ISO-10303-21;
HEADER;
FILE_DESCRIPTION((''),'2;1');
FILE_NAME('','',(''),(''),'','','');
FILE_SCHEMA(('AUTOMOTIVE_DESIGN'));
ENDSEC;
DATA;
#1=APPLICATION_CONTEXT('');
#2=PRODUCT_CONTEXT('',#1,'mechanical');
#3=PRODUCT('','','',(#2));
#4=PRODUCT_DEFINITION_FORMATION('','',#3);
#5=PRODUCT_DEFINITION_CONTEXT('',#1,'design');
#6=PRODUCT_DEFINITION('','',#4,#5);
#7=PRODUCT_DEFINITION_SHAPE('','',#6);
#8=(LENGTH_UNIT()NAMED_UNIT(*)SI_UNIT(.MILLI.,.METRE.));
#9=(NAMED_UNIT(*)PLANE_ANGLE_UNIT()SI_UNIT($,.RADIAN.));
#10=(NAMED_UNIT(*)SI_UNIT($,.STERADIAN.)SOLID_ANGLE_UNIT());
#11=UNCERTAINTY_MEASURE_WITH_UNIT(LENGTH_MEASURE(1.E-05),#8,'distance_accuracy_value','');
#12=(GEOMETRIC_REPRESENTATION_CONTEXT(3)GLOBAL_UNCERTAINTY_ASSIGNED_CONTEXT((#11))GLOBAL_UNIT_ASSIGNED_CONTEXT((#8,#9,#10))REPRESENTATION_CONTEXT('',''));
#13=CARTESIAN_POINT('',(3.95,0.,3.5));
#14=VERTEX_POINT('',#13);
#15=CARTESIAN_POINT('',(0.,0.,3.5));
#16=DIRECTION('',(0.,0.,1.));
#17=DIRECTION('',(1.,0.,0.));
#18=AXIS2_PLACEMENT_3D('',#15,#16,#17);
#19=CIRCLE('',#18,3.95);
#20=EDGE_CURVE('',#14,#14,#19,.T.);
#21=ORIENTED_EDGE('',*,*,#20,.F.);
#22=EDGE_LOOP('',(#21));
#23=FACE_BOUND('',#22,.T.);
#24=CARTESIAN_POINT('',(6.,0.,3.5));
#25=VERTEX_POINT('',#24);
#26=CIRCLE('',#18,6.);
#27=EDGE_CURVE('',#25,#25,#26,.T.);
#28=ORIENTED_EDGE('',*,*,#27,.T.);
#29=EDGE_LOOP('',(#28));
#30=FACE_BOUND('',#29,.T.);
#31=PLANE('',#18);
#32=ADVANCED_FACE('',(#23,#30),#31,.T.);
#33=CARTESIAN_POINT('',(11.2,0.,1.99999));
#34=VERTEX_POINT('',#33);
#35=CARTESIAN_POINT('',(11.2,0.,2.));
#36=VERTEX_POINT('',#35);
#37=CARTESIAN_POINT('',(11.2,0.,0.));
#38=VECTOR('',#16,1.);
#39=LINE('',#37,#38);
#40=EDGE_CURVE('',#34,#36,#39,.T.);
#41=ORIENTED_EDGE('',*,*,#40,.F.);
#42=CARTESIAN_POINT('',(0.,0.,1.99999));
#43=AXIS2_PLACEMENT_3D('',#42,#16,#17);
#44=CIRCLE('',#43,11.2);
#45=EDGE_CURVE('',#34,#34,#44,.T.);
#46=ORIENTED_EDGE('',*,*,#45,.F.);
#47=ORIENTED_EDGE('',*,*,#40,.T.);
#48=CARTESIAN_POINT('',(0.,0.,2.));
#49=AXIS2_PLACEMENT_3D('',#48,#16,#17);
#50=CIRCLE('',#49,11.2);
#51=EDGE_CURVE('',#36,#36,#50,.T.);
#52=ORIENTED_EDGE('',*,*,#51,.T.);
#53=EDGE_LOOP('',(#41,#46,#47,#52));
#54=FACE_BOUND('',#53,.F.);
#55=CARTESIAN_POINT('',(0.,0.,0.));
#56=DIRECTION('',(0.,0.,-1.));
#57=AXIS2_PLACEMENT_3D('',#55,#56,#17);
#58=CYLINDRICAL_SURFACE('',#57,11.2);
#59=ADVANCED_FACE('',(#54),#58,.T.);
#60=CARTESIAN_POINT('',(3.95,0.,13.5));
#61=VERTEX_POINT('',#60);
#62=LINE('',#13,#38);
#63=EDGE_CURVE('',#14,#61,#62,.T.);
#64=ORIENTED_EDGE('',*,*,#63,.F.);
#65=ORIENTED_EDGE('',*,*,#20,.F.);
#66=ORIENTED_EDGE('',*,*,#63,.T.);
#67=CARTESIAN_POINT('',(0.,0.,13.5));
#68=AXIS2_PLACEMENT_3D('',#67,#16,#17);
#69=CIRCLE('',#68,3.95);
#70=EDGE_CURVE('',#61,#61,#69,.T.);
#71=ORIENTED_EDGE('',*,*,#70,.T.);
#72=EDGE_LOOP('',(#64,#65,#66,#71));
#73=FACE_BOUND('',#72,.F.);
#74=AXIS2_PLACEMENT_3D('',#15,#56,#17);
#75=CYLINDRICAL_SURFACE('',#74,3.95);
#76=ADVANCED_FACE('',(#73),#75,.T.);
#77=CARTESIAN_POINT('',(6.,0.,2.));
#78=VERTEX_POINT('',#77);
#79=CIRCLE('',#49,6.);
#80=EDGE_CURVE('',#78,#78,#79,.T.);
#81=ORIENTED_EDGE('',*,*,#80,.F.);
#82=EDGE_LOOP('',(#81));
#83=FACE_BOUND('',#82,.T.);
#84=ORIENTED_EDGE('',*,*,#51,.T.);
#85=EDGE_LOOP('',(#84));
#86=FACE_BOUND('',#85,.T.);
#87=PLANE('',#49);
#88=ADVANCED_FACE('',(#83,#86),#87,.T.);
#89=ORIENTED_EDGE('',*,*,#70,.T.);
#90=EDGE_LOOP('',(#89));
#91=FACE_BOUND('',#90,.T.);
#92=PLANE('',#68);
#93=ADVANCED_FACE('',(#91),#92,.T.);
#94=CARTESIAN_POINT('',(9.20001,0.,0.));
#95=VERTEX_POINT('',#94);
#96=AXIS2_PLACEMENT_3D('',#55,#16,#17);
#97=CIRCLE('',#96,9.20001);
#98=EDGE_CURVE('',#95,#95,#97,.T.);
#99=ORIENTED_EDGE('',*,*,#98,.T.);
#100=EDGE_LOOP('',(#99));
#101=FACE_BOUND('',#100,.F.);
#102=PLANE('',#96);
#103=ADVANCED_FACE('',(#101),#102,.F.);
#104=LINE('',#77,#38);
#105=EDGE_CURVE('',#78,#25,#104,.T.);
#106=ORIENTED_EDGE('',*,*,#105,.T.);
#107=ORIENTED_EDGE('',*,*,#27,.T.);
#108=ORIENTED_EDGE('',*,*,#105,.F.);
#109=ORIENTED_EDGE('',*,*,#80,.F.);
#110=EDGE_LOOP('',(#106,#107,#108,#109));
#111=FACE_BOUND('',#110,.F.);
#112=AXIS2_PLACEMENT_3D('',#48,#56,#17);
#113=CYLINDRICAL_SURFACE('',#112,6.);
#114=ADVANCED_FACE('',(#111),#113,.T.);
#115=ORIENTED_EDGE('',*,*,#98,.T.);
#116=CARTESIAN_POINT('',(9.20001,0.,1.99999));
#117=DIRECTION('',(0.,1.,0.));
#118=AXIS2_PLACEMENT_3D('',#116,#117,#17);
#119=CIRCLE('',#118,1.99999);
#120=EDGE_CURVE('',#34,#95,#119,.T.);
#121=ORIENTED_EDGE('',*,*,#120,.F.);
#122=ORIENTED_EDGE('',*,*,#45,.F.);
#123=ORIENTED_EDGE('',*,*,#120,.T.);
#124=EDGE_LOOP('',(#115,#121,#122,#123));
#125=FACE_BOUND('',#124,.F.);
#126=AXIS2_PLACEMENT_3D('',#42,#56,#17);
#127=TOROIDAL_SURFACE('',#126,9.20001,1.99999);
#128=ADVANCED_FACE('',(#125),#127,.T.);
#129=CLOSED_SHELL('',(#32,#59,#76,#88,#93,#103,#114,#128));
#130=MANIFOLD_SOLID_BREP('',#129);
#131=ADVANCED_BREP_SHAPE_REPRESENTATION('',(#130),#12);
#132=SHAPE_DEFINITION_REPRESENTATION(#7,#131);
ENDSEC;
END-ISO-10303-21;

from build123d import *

# Parameters (mm, degrees)
F0_R     = 11.2
F1_DEPTH = 2
F2_R     = 6
F3_DEPTH = 1.5
F4_R     = 3.95
F5_DEPTH = 10
F6_R     = 1.99999


# Not quite as in the source:
# - a fillet or chamfer is up to 0.001 mm smaller than in the source, because OpenCascade refuses the exact size


with BuildPart() as f1:
    # F0 (on Top) → F1 (new body)
    with BuildSketch(Plane.XY):
        Circle(F0_R)
    extrude(amount=F1_DEPTH)

    # F2 (on face) → F3 (join)
    with BuildSketch(Plane.XY.offset(2)):
        Circle(F2_R)
    extrude(amount=F3_DEPTH)

    # F4 (on face) → F5 (join)
    with BuildSketch(Plane.XY.offset(3.5)):
        Circle(F4_R)
    extrude(amount=F5_DEPTH)

    # F6 (radius 2 in the source; OpenCascade refuses exactly that, so slightly less here)
    f6_edges = [f1.edges().sort_by_distance(p)[0] for p in [
        (-11.2, 0, 0),
    ]]
    fillet(f6_edges, radius=F6_R)


solid = f1.part
